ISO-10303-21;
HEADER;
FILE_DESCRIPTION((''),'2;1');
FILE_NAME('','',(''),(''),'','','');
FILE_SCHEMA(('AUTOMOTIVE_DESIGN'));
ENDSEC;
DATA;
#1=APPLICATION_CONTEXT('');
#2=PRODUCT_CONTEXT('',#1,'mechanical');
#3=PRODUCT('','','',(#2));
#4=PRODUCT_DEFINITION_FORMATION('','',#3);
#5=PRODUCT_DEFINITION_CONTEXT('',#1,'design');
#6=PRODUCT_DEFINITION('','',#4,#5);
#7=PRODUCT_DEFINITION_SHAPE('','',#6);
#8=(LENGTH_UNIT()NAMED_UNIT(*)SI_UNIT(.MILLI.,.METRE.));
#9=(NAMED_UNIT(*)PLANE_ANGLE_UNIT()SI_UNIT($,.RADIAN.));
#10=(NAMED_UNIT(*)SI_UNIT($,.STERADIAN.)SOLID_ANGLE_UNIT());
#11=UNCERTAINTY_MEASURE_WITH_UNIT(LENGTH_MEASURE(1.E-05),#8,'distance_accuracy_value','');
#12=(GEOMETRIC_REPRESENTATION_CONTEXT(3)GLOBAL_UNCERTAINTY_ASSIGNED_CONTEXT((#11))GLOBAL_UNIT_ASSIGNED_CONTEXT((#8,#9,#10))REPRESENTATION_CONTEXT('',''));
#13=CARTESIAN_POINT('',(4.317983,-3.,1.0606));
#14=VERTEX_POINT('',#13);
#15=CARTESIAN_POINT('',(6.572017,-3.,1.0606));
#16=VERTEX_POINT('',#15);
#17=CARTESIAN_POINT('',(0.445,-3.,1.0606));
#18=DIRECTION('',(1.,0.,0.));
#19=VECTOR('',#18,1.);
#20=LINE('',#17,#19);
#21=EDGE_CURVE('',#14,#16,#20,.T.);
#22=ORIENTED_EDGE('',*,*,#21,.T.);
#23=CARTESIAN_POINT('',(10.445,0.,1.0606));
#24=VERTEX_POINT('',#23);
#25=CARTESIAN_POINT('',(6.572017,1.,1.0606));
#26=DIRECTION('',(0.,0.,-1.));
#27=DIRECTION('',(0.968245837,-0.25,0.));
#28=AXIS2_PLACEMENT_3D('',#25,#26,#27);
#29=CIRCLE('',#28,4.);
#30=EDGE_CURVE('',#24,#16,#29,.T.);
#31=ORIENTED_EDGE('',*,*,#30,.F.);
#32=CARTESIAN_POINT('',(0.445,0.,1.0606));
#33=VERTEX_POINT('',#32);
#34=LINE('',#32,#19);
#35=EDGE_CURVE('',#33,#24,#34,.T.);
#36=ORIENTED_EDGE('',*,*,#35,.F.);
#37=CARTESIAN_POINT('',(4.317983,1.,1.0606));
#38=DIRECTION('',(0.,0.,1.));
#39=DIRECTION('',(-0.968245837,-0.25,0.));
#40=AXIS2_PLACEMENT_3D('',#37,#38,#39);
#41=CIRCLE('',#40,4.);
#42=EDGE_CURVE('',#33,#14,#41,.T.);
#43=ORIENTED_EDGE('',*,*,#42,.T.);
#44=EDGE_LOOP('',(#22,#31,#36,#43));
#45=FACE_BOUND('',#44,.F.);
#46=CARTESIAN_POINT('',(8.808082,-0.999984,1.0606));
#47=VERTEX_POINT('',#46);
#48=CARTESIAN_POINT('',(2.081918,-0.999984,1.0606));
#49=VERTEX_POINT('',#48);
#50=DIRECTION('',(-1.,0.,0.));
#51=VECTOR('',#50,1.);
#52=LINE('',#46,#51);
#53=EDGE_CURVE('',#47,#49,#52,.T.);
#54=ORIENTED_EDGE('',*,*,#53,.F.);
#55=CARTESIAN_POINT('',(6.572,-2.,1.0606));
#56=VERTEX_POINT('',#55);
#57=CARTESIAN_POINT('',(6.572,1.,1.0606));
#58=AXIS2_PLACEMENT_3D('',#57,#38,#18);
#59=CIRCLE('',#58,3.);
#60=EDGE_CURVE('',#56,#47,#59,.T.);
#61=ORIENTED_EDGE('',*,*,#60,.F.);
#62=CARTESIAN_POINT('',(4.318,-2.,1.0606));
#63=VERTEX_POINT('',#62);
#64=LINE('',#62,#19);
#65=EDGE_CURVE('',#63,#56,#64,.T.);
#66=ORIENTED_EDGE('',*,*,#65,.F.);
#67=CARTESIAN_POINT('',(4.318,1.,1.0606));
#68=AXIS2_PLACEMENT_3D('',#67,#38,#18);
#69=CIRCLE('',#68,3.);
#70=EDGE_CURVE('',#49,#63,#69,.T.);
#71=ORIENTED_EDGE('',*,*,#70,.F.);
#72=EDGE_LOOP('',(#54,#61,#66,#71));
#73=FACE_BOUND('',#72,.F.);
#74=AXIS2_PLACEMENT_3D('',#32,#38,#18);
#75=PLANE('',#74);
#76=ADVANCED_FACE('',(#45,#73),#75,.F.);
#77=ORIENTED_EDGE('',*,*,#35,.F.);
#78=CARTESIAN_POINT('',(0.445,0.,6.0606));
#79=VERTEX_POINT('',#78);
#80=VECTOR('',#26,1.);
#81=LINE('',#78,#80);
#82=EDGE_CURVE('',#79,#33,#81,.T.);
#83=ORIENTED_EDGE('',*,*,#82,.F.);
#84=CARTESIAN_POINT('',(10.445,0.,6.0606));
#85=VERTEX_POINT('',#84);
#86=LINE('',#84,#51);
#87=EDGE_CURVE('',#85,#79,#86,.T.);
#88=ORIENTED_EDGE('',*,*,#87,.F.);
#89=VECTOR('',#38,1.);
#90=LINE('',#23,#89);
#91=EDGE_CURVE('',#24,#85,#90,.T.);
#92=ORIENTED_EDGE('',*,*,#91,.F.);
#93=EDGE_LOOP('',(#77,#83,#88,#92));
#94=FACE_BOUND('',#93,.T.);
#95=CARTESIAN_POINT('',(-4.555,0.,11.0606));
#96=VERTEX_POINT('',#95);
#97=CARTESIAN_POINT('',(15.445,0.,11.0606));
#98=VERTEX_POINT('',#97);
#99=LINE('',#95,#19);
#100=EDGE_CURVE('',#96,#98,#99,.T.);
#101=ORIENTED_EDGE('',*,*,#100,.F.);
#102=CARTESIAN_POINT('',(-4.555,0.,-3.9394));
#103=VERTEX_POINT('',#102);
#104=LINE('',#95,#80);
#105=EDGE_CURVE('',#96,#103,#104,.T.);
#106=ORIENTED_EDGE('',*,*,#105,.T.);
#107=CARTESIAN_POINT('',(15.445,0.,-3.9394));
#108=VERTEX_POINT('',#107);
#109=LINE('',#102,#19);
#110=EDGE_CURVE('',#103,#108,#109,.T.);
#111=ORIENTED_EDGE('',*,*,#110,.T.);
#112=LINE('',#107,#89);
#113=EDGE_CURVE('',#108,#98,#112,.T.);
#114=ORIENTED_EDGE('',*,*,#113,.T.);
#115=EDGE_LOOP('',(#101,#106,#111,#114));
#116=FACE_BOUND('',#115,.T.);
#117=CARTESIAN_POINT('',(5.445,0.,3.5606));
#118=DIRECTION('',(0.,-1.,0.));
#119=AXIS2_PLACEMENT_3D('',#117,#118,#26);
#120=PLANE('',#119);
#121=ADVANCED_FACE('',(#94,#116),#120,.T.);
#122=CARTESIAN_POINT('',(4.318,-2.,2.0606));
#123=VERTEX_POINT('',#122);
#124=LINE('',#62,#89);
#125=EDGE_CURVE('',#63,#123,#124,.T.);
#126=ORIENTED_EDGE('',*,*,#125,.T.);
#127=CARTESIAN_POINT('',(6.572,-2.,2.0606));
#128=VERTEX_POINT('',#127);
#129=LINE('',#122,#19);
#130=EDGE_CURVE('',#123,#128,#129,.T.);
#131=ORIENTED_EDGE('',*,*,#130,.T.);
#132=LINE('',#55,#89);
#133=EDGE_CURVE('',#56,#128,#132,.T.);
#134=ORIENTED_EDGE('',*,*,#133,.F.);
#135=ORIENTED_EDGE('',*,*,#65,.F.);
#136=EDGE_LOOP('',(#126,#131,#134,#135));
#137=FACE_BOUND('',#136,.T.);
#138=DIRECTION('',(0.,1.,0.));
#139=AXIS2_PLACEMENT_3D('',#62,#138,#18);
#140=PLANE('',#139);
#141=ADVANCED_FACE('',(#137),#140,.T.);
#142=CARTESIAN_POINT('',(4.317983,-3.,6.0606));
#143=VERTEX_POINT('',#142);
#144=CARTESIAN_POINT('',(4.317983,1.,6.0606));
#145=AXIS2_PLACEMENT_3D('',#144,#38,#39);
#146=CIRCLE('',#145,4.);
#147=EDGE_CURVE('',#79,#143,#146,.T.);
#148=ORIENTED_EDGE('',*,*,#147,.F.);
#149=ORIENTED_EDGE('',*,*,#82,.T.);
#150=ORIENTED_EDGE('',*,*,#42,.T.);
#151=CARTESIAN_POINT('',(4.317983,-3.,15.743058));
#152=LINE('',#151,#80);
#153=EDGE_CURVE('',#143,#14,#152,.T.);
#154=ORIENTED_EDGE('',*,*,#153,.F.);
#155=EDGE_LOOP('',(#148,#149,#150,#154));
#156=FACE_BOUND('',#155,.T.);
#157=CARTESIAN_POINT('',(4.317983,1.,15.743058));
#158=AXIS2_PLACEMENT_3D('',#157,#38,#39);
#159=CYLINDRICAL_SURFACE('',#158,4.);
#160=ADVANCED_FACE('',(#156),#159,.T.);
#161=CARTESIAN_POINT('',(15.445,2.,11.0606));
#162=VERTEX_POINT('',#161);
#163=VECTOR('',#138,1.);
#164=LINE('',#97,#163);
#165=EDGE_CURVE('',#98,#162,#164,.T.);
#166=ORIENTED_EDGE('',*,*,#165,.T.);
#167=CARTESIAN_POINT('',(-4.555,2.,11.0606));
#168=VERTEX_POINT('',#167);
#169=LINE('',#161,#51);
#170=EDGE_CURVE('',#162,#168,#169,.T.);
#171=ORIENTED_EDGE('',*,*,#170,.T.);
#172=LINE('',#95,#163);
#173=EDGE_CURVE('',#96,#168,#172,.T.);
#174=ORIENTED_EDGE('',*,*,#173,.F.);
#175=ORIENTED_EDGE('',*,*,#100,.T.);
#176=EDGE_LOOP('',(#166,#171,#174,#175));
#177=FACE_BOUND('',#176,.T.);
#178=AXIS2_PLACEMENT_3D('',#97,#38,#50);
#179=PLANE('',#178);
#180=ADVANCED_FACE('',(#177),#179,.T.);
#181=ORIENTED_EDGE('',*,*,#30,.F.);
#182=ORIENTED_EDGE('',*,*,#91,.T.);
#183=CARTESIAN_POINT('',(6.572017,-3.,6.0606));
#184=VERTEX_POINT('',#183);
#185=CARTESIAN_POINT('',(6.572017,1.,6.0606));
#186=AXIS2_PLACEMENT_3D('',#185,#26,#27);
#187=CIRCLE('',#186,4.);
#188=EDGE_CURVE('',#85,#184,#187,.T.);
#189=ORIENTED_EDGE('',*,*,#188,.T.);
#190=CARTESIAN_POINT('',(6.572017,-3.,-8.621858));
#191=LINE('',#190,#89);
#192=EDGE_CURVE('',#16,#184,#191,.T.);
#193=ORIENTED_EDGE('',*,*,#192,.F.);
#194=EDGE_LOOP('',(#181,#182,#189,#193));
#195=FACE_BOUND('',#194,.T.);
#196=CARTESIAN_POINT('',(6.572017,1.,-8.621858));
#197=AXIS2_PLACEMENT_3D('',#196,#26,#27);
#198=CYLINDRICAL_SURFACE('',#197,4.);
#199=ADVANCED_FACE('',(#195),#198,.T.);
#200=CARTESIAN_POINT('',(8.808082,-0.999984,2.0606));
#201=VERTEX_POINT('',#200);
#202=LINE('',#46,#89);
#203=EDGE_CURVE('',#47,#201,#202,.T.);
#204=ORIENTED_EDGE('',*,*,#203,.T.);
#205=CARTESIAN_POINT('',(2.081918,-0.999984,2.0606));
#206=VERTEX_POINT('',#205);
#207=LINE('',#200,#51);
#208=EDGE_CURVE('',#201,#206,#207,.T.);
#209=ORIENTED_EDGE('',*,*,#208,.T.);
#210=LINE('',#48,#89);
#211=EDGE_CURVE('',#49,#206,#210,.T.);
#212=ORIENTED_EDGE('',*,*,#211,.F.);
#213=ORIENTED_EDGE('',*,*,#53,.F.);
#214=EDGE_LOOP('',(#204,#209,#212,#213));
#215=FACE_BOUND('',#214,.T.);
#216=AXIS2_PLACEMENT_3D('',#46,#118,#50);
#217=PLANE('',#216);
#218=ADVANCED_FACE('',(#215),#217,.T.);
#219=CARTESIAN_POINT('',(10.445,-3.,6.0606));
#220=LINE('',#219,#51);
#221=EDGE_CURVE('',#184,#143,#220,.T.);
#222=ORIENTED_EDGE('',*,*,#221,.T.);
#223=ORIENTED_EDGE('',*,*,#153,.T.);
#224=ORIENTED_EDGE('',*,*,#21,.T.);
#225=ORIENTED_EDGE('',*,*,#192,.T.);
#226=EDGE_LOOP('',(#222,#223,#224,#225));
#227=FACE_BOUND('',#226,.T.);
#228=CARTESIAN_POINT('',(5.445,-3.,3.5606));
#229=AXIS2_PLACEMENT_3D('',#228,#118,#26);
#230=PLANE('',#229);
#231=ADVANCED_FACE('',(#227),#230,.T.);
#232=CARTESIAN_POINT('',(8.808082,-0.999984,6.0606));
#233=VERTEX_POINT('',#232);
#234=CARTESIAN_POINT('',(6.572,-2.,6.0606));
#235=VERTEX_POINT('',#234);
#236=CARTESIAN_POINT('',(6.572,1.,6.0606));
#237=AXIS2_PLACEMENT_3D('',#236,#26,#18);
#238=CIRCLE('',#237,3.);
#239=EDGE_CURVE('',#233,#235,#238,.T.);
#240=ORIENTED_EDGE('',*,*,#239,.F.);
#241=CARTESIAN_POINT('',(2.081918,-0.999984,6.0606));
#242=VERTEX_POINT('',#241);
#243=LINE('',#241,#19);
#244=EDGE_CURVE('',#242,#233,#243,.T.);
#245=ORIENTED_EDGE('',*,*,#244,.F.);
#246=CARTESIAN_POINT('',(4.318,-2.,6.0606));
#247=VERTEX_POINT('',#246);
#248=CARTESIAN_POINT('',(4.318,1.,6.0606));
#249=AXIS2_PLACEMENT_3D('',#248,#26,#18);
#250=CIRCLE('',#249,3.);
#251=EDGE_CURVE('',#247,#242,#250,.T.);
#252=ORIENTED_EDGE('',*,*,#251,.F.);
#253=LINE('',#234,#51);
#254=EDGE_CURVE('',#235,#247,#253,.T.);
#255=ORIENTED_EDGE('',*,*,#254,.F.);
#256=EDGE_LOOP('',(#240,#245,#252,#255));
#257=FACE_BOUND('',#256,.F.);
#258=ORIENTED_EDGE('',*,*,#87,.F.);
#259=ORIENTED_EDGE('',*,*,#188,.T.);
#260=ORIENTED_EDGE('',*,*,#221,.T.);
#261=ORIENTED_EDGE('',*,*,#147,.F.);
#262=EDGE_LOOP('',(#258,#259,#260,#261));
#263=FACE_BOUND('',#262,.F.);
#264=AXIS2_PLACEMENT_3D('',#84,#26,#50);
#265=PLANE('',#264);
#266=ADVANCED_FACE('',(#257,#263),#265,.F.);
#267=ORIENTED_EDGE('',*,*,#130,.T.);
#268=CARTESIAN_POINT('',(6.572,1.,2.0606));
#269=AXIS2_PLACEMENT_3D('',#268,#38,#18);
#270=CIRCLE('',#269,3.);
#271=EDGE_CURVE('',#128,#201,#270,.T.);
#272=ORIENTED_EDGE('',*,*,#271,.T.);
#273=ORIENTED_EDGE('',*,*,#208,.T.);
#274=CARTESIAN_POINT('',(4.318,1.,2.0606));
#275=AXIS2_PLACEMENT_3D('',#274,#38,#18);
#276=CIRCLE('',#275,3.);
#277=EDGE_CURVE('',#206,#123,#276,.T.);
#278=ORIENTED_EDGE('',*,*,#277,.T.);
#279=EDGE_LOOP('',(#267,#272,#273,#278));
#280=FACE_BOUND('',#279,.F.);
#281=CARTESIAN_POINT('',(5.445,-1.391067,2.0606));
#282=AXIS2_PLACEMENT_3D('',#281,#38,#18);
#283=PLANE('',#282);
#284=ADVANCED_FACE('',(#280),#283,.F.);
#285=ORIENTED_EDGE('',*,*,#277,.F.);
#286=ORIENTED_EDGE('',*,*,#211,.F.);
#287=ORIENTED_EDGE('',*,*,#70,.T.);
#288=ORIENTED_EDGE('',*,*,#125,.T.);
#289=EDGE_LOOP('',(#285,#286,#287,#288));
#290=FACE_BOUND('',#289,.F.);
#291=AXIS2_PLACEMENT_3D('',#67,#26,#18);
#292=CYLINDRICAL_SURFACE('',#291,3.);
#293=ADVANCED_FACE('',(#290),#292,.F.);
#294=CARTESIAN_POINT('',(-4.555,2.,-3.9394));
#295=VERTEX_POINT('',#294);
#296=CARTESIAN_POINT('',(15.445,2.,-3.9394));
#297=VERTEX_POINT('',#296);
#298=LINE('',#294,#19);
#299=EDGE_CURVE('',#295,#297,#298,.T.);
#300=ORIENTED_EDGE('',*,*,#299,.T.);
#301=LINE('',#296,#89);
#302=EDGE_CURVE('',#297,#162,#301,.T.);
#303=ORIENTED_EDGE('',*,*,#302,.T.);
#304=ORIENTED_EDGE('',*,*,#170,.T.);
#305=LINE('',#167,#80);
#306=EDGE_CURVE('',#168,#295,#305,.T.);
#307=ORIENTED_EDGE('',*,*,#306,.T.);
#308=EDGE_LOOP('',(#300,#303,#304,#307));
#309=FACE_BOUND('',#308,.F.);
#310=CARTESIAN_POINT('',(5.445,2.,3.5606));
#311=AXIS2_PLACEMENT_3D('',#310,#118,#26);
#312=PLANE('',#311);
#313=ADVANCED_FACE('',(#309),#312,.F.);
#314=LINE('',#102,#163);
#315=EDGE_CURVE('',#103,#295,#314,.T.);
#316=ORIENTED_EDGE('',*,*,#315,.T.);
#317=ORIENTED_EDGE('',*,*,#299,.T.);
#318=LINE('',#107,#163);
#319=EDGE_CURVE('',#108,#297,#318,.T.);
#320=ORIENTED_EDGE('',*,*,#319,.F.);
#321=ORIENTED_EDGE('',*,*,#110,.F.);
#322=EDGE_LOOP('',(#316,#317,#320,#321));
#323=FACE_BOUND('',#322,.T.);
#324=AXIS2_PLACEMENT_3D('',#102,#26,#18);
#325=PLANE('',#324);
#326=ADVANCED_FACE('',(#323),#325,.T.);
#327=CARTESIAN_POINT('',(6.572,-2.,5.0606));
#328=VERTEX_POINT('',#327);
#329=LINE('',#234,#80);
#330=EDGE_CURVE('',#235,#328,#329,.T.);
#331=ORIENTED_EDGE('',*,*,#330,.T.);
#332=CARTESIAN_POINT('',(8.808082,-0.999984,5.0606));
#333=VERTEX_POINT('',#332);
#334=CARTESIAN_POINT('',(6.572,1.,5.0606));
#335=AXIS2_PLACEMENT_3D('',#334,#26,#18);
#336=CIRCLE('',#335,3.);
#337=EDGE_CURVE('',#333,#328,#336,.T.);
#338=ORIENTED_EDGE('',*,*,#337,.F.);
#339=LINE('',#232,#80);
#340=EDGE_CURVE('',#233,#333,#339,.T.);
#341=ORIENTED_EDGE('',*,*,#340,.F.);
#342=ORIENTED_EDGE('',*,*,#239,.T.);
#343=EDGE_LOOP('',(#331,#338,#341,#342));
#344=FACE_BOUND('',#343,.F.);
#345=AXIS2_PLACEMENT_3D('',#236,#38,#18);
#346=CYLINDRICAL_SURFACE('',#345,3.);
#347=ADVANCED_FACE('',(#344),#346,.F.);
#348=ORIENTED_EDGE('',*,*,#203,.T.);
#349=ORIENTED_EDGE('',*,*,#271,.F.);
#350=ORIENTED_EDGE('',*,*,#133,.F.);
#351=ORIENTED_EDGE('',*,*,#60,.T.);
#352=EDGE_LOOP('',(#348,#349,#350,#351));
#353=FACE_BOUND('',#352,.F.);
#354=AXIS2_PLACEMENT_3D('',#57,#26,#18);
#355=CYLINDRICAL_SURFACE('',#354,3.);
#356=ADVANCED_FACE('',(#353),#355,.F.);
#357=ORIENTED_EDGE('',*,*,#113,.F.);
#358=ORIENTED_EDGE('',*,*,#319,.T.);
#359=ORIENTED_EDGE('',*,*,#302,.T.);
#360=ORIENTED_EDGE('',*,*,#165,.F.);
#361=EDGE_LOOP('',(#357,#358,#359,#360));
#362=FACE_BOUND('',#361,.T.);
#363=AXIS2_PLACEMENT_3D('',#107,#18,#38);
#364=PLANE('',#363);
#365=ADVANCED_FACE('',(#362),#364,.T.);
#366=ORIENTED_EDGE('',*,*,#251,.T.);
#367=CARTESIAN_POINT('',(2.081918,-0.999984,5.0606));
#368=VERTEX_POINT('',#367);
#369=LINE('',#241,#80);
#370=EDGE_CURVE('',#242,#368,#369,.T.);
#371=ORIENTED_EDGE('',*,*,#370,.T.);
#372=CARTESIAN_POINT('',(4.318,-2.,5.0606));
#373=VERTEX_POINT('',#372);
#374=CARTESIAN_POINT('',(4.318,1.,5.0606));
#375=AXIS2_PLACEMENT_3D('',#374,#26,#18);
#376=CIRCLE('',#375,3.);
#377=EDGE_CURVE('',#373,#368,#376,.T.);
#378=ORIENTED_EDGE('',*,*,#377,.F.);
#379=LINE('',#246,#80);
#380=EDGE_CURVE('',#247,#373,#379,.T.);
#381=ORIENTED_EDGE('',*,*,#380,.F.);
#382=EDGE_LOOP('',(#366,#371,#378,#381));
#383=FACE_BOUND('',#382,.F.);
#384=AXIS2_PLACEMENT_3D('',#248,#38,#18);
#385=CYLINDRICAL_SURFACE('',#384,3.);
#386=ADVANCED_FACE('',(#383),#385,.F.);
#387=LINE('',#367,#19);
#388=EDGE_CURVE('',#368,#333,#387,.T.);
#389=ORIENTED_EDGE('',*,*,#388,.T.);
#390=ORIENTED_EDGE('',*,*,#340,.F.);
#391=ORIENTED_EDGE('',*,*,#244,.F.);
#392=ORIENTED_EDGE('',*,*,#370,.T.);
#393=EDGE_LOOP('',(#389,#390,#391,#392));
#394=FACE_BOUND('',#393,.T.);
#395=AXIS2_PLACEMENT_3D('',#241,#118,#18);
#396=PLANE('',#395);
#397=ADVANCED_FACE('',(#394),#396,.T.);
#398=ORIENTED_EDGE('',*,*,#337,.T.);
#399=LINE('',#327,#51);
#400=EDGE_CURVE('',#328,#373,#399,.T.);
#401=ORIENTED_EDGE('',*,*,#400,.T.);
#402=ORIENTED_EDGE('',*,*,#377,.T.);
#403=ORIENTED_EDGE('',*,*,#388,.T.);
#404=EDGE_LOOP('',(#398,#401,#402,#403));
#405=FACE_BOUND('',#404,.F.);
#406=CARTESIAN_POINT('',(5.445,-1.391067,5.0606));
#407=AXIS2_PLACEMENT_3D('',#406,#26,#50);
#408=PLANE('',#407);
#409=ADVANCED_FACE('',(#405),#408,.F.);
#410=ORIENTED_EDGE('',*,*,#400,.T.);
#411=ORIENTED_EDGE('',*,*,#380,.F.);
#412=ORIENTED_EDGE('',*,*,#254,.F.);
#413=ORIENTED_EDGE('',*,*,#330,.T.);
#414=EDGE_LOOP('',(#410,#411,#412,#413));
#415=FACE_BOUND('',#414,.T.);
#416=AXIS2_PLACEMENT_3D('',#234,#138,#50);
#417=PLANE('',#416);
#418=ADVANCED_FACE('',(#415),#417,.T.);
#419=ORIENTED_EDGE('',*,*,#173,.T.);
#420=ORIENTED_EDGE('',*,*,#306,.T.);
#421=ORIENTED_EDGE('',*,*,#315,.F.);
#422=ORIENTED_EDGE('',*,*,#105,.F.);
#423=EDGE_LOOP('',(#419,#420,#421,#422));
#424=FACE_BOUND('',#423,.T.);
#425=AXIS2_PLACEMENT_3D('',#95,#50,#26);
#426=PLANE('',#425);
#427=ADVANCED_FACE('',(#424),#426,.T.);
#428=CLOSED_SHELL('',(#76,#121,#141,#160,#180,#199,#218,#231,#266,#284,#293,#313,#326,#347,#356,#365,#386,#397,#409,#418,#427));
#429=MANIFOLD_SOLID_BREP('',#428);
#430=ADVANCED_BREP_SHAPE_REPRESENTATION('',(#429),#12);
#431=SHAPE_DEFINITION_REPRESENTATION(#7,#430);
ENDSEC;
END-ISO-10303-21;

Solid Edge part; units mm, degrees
sketch "Sketch1" plane through (4.7659, 0, 3.5606) normal (0, -1, 0) x (1, 0, 0)
  line L0 (10.6791, 7.5) -> (-9.3209, 7.5)
  line L1 (-9.3209, 7.5) -> (-9.3209, -7.5)
  line L2 (-9.3209, -7.5) -> (10.6791, -7.5)
  line L3 (10.6791, -7.5) -> (10.6791, 7.5)
extrude "Protrusion1" add sketch "Sketch1" against normal blind 2
sketch "Sketch2" plane through (0, 0, 0) normal (0, -1, 0) x (1, 0, 0)
  line L0 (10.445, 6.0606) -> (0.445, 6.0606)
  line L1 (0.445, 6.0606) -> (0.445, 1.0606)
  line L2 (0.445, 1.0606) -> (10.445, 1.0606)
  line L3 (10.445, 1.0606) -> (10.445, 6.0606)
extrude "Protrusion2" add sketch "Sketch2" along normal blind 3
fillet "Round_2" radius 4 2 edges at (10.445, -3, 3.5606) (0.445, -3, 3.5606)
sketch "Sketch3" plane through (5.445, -1.5, 1.0606) normal (0, 0, -1) x (1, 0, 0)
  line L0 (-1.127, 0.5) -> (1.127, 0.5)
  arc A0 (1.127, 0.5) -> (3.3631, -0.5) centre (1.127, -2.5) cw
  line L1 (3.3631, -0.5) -> (-3.3631, -0.5)
  arc A1 (-3.3631, -0.5) -> (-1.127, 0.5) centre (-1.127, -2.5) cw
  dimension "D1" = 1
extrude "ExtrudedCutout_1" cut sketch "Sketch3" against normal blind 1
sketch "Sketch4" plane through (5.445, -1.5, 6.0606) normal (0, 0, 1) x (1, 0, 0)
  line L0 (1.127, -0.5) -> (-1.127, -0.5)
  arc A0 (-1.127, -0.5) -> (-3.3631, 0.5) centre (-1.127, 2.5) cw
  line L1 (-3.3631, 0.5) -> (3.3631, 0.5)
  arc A1 (3.3631, 0.5) -> (1.127, -0.5) centre (1.127, 2.5) cw
  dimension "D1" = 1
extrude "ExtrudedCutout_2" cut sketch "Sketch4" against normal blind 1
